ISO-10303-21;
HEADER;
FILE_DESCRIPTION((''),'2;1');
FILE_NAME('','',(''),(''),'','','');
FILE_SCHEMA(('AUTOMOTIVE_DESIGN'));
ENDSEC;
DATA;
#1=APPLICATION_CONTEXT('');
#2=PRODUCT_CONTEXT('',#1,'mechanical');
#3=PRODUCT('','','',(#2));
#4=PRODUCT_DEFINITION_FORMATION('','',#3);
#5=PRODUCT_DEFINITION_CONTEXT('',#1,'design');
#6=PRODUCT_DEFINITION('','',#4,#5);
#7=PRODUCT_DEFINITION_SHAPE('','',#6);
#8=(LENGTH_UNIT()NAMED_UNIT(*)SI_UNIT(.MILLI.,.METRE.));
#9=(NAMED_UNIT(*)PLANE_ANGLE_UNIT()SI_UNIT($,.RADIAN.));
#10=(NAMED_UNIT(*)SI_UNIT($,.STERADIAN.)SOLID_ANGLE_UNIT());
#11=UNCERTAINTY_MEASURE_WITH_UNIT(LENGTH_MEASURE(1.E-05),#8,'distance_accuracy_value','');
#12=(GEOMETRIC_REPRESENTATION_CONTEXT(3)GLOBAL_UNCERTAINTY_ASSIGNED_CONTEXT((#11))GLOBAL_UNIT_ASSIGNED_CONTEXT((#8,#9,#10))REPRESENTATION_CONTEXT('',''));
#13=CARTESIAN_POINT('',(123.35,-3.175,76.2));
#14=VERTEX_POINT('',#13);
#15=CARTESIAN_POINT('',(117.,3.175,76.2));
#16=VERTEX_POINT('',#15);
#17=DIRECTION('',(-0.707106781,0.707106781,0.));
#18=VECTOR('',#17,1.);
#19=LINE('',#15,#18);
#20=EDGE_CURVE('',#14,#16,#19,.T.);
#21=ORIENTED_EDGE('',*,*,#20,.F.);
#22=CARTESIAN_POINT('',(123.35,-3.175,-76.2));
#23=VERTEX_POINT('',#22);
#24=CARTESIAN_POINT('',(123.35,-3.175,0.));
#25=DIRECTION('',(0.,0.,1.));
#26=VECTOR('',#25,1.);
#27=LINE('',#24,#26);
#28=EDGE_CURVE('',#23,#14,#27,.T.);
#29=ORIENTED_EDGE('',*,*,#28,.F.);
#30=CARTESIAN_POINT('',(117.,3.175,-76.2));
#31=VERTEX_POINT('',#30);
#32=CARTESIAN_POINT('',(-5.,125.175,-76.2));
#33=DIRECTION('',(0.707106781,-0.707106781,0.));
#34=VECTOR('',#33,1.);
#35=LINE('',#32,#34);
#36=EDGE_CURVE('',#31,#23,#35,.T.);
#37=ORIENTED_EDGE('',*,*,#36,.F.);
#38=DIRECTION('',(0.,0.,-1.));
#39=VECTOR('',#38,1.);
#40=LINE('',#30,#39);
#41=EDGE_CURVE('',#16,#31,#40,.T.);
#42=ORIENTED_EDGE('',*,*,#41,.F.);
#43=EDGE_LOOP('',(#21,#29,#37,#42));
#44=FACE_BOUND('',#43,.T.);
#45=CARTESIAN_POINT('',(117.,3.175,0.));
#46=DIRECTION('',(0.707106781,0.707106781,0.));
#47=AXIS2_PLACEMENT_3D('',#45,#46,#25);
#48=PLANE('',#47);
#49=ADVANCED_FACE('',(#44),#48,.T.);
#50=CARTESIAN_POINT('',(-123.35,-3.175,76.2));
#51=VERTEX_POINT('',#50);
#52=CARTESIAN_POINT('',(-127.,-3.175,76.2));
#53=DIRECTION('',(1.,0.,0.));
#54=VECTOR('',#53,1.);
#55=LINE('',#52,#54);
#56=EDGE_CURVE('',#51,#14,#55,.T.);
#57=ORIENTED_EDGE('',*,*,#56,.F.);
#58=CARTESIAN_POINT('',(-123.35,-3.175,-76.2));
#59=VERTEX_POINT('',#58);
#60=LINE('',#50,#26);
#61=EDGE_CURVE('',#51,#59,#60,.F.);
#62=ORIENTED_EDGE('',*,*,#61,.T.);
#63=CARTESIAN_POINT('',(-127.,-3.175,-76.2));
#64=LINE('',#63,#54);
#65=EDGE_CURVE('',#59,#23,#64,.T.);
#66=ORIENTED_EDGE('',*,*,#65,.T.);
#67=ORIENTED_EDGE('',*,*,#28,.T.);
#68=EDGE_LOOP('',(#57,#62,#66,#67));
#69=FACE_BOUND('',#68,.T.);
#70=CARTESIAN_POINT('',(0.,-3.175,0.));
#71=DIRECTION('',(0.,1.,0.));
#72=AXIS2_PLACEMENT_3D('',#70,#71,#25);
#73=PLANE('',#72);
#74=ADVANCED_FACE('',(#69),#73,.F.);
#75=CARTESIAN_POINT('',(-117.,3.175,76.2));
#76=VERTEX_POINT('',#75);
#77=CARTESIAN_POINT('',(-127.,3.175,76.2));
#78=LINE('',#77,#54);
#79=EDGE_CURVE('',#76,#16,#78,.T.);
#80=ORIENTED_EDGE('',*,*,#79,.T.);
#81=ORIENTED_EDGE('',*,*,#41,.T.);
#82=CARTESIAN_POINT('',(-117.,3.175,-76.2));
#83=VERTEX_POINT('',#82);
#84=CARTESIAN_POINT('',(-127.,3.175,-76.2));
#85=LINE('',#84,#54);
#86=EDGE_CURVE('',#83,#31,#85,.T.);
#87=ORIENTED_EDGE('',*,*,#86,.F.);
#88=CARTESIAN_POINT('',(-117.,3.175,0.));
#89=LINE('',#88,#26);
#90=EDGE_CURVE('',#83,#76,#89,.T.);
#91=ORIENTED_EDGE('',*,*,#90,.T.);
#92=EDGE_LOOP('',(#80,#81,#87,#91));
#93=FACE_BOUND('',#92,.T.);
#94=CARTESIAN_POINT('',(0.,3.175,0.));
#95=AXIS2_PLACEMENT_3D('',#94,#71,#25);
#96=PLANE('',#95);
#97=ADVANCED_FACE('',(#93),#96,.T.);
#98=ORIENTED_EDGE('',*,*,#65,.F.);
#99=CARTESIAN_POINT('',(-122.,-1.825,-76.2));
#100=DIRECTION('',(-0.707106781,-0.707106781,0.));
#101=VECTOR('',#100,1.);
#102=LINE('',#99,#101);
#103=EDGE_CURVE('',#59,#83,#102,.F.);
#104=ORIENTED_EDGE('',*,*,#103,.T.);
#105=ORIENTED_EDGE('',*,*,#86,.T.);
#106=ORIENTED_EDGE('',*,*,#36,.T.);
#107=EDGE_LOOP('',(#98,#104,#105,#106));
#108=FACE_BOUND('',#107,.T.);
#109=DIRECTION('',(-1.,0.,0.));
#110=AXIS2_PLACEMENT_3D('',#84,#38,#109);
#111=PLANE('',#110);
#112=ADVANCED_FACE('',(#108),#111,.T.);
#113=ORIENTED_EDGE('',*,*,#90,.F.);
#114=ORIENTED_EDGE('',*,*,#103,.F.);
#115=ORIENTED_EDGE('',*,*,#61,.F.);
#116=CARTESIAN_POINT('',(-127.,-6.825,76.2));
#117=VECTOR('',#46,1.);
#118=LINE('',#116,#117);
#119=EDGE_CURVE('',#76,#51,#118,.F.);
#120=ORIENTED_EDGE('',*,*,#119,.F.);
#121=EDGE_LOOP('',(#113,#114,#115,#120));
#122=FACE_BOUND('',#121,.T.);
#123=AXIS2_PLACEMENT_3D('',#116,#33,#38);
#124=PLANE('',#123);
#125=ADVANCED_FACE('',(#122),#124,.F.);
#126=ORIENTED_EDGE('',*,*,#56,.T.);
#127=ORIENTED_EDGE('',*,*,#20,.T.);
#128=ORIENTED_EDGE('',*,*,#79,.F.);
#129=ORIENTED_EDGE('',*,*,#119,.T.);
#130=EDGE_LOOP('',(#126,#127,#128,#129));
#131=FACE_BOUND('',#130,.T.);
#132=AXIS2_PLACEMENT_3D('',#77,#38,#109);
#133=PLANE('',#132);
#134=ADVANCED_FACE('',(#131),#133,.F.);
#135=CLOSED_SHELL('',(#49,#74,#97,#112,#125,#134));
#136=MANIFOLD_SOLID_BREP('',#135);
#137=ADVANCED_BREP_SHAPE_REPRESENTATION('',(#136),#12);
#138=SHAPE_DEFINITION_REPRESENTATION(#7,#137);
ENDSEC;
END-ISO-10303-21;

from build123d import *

# Parameters (mm, degrees)
SKETCH2_W           = 254
SKETCH2_H           = 152.4
BOSS_EXTRUDE1_DEPTH = 3.175
CHAMFER1_SIZE       = 10
CHAMFER2_SIZE       = 10


with BuildPart() as part:
    # Sketch2 → Boss-Extrude1 (new, symmetric)
    with BuildSketch(Plane(origin=(0, 0, 0), x_dir=(1, 0, 0), z_dir=(0, 1, 0))):
        Rectangle(SKETCH2_W, SKETCH2_H)
    extrude(amount=BOSS_EXTRUDE1_DEPTH, both=True)

    # Chamfer1
    # the kernel refuses this chamfer: 10 mm, written as the material it takes off along each edge
    with BuildSketch(Plane(origin=(-127, 3.175, -101.91682988), x_dir=(-0.027495876610586317, -0.9996219169112968, 0), z_dir=(0, 0, 1))) as chamfer1_piece_1:
        Polygon((CHAMFER1_SIZE * 0.999621916911, CHAMFER1_SIZE * 0.0274958766106), (-CHAMFER1_SIZE * 0.0274958766106, CHAMFER1_SIZE * 0.999621916911), (0, 0), align=None)
    extrude(amount=203.833659759, mode=Mode.SUBTRACT)

    # Chamfer2
    # the kernel refuses this chamfer: 10 mm, written as the material it takes off along each edge
    with BuildSketch(Plane(origin=(127, 3.175, 101.91682988), x_dir=(-0.9996219169112968, 0.02749587661058636, 0), z_dir=(0, 0, -1))) as chamfer2_piece_1:
        Polygon((CHAMFER2_SIZE * 0.999621916911, -CHAMFER2_SIZE * 0.0274958766106), (-CHAMFER2_SIZE * 0.0274958766106, -CHAMFER2_SIZE * 0.999621916911), (0, 0), align=None)
    extrude(amount=203.833659759, mode=Mode.SUBTRACT)


solid = part.part
